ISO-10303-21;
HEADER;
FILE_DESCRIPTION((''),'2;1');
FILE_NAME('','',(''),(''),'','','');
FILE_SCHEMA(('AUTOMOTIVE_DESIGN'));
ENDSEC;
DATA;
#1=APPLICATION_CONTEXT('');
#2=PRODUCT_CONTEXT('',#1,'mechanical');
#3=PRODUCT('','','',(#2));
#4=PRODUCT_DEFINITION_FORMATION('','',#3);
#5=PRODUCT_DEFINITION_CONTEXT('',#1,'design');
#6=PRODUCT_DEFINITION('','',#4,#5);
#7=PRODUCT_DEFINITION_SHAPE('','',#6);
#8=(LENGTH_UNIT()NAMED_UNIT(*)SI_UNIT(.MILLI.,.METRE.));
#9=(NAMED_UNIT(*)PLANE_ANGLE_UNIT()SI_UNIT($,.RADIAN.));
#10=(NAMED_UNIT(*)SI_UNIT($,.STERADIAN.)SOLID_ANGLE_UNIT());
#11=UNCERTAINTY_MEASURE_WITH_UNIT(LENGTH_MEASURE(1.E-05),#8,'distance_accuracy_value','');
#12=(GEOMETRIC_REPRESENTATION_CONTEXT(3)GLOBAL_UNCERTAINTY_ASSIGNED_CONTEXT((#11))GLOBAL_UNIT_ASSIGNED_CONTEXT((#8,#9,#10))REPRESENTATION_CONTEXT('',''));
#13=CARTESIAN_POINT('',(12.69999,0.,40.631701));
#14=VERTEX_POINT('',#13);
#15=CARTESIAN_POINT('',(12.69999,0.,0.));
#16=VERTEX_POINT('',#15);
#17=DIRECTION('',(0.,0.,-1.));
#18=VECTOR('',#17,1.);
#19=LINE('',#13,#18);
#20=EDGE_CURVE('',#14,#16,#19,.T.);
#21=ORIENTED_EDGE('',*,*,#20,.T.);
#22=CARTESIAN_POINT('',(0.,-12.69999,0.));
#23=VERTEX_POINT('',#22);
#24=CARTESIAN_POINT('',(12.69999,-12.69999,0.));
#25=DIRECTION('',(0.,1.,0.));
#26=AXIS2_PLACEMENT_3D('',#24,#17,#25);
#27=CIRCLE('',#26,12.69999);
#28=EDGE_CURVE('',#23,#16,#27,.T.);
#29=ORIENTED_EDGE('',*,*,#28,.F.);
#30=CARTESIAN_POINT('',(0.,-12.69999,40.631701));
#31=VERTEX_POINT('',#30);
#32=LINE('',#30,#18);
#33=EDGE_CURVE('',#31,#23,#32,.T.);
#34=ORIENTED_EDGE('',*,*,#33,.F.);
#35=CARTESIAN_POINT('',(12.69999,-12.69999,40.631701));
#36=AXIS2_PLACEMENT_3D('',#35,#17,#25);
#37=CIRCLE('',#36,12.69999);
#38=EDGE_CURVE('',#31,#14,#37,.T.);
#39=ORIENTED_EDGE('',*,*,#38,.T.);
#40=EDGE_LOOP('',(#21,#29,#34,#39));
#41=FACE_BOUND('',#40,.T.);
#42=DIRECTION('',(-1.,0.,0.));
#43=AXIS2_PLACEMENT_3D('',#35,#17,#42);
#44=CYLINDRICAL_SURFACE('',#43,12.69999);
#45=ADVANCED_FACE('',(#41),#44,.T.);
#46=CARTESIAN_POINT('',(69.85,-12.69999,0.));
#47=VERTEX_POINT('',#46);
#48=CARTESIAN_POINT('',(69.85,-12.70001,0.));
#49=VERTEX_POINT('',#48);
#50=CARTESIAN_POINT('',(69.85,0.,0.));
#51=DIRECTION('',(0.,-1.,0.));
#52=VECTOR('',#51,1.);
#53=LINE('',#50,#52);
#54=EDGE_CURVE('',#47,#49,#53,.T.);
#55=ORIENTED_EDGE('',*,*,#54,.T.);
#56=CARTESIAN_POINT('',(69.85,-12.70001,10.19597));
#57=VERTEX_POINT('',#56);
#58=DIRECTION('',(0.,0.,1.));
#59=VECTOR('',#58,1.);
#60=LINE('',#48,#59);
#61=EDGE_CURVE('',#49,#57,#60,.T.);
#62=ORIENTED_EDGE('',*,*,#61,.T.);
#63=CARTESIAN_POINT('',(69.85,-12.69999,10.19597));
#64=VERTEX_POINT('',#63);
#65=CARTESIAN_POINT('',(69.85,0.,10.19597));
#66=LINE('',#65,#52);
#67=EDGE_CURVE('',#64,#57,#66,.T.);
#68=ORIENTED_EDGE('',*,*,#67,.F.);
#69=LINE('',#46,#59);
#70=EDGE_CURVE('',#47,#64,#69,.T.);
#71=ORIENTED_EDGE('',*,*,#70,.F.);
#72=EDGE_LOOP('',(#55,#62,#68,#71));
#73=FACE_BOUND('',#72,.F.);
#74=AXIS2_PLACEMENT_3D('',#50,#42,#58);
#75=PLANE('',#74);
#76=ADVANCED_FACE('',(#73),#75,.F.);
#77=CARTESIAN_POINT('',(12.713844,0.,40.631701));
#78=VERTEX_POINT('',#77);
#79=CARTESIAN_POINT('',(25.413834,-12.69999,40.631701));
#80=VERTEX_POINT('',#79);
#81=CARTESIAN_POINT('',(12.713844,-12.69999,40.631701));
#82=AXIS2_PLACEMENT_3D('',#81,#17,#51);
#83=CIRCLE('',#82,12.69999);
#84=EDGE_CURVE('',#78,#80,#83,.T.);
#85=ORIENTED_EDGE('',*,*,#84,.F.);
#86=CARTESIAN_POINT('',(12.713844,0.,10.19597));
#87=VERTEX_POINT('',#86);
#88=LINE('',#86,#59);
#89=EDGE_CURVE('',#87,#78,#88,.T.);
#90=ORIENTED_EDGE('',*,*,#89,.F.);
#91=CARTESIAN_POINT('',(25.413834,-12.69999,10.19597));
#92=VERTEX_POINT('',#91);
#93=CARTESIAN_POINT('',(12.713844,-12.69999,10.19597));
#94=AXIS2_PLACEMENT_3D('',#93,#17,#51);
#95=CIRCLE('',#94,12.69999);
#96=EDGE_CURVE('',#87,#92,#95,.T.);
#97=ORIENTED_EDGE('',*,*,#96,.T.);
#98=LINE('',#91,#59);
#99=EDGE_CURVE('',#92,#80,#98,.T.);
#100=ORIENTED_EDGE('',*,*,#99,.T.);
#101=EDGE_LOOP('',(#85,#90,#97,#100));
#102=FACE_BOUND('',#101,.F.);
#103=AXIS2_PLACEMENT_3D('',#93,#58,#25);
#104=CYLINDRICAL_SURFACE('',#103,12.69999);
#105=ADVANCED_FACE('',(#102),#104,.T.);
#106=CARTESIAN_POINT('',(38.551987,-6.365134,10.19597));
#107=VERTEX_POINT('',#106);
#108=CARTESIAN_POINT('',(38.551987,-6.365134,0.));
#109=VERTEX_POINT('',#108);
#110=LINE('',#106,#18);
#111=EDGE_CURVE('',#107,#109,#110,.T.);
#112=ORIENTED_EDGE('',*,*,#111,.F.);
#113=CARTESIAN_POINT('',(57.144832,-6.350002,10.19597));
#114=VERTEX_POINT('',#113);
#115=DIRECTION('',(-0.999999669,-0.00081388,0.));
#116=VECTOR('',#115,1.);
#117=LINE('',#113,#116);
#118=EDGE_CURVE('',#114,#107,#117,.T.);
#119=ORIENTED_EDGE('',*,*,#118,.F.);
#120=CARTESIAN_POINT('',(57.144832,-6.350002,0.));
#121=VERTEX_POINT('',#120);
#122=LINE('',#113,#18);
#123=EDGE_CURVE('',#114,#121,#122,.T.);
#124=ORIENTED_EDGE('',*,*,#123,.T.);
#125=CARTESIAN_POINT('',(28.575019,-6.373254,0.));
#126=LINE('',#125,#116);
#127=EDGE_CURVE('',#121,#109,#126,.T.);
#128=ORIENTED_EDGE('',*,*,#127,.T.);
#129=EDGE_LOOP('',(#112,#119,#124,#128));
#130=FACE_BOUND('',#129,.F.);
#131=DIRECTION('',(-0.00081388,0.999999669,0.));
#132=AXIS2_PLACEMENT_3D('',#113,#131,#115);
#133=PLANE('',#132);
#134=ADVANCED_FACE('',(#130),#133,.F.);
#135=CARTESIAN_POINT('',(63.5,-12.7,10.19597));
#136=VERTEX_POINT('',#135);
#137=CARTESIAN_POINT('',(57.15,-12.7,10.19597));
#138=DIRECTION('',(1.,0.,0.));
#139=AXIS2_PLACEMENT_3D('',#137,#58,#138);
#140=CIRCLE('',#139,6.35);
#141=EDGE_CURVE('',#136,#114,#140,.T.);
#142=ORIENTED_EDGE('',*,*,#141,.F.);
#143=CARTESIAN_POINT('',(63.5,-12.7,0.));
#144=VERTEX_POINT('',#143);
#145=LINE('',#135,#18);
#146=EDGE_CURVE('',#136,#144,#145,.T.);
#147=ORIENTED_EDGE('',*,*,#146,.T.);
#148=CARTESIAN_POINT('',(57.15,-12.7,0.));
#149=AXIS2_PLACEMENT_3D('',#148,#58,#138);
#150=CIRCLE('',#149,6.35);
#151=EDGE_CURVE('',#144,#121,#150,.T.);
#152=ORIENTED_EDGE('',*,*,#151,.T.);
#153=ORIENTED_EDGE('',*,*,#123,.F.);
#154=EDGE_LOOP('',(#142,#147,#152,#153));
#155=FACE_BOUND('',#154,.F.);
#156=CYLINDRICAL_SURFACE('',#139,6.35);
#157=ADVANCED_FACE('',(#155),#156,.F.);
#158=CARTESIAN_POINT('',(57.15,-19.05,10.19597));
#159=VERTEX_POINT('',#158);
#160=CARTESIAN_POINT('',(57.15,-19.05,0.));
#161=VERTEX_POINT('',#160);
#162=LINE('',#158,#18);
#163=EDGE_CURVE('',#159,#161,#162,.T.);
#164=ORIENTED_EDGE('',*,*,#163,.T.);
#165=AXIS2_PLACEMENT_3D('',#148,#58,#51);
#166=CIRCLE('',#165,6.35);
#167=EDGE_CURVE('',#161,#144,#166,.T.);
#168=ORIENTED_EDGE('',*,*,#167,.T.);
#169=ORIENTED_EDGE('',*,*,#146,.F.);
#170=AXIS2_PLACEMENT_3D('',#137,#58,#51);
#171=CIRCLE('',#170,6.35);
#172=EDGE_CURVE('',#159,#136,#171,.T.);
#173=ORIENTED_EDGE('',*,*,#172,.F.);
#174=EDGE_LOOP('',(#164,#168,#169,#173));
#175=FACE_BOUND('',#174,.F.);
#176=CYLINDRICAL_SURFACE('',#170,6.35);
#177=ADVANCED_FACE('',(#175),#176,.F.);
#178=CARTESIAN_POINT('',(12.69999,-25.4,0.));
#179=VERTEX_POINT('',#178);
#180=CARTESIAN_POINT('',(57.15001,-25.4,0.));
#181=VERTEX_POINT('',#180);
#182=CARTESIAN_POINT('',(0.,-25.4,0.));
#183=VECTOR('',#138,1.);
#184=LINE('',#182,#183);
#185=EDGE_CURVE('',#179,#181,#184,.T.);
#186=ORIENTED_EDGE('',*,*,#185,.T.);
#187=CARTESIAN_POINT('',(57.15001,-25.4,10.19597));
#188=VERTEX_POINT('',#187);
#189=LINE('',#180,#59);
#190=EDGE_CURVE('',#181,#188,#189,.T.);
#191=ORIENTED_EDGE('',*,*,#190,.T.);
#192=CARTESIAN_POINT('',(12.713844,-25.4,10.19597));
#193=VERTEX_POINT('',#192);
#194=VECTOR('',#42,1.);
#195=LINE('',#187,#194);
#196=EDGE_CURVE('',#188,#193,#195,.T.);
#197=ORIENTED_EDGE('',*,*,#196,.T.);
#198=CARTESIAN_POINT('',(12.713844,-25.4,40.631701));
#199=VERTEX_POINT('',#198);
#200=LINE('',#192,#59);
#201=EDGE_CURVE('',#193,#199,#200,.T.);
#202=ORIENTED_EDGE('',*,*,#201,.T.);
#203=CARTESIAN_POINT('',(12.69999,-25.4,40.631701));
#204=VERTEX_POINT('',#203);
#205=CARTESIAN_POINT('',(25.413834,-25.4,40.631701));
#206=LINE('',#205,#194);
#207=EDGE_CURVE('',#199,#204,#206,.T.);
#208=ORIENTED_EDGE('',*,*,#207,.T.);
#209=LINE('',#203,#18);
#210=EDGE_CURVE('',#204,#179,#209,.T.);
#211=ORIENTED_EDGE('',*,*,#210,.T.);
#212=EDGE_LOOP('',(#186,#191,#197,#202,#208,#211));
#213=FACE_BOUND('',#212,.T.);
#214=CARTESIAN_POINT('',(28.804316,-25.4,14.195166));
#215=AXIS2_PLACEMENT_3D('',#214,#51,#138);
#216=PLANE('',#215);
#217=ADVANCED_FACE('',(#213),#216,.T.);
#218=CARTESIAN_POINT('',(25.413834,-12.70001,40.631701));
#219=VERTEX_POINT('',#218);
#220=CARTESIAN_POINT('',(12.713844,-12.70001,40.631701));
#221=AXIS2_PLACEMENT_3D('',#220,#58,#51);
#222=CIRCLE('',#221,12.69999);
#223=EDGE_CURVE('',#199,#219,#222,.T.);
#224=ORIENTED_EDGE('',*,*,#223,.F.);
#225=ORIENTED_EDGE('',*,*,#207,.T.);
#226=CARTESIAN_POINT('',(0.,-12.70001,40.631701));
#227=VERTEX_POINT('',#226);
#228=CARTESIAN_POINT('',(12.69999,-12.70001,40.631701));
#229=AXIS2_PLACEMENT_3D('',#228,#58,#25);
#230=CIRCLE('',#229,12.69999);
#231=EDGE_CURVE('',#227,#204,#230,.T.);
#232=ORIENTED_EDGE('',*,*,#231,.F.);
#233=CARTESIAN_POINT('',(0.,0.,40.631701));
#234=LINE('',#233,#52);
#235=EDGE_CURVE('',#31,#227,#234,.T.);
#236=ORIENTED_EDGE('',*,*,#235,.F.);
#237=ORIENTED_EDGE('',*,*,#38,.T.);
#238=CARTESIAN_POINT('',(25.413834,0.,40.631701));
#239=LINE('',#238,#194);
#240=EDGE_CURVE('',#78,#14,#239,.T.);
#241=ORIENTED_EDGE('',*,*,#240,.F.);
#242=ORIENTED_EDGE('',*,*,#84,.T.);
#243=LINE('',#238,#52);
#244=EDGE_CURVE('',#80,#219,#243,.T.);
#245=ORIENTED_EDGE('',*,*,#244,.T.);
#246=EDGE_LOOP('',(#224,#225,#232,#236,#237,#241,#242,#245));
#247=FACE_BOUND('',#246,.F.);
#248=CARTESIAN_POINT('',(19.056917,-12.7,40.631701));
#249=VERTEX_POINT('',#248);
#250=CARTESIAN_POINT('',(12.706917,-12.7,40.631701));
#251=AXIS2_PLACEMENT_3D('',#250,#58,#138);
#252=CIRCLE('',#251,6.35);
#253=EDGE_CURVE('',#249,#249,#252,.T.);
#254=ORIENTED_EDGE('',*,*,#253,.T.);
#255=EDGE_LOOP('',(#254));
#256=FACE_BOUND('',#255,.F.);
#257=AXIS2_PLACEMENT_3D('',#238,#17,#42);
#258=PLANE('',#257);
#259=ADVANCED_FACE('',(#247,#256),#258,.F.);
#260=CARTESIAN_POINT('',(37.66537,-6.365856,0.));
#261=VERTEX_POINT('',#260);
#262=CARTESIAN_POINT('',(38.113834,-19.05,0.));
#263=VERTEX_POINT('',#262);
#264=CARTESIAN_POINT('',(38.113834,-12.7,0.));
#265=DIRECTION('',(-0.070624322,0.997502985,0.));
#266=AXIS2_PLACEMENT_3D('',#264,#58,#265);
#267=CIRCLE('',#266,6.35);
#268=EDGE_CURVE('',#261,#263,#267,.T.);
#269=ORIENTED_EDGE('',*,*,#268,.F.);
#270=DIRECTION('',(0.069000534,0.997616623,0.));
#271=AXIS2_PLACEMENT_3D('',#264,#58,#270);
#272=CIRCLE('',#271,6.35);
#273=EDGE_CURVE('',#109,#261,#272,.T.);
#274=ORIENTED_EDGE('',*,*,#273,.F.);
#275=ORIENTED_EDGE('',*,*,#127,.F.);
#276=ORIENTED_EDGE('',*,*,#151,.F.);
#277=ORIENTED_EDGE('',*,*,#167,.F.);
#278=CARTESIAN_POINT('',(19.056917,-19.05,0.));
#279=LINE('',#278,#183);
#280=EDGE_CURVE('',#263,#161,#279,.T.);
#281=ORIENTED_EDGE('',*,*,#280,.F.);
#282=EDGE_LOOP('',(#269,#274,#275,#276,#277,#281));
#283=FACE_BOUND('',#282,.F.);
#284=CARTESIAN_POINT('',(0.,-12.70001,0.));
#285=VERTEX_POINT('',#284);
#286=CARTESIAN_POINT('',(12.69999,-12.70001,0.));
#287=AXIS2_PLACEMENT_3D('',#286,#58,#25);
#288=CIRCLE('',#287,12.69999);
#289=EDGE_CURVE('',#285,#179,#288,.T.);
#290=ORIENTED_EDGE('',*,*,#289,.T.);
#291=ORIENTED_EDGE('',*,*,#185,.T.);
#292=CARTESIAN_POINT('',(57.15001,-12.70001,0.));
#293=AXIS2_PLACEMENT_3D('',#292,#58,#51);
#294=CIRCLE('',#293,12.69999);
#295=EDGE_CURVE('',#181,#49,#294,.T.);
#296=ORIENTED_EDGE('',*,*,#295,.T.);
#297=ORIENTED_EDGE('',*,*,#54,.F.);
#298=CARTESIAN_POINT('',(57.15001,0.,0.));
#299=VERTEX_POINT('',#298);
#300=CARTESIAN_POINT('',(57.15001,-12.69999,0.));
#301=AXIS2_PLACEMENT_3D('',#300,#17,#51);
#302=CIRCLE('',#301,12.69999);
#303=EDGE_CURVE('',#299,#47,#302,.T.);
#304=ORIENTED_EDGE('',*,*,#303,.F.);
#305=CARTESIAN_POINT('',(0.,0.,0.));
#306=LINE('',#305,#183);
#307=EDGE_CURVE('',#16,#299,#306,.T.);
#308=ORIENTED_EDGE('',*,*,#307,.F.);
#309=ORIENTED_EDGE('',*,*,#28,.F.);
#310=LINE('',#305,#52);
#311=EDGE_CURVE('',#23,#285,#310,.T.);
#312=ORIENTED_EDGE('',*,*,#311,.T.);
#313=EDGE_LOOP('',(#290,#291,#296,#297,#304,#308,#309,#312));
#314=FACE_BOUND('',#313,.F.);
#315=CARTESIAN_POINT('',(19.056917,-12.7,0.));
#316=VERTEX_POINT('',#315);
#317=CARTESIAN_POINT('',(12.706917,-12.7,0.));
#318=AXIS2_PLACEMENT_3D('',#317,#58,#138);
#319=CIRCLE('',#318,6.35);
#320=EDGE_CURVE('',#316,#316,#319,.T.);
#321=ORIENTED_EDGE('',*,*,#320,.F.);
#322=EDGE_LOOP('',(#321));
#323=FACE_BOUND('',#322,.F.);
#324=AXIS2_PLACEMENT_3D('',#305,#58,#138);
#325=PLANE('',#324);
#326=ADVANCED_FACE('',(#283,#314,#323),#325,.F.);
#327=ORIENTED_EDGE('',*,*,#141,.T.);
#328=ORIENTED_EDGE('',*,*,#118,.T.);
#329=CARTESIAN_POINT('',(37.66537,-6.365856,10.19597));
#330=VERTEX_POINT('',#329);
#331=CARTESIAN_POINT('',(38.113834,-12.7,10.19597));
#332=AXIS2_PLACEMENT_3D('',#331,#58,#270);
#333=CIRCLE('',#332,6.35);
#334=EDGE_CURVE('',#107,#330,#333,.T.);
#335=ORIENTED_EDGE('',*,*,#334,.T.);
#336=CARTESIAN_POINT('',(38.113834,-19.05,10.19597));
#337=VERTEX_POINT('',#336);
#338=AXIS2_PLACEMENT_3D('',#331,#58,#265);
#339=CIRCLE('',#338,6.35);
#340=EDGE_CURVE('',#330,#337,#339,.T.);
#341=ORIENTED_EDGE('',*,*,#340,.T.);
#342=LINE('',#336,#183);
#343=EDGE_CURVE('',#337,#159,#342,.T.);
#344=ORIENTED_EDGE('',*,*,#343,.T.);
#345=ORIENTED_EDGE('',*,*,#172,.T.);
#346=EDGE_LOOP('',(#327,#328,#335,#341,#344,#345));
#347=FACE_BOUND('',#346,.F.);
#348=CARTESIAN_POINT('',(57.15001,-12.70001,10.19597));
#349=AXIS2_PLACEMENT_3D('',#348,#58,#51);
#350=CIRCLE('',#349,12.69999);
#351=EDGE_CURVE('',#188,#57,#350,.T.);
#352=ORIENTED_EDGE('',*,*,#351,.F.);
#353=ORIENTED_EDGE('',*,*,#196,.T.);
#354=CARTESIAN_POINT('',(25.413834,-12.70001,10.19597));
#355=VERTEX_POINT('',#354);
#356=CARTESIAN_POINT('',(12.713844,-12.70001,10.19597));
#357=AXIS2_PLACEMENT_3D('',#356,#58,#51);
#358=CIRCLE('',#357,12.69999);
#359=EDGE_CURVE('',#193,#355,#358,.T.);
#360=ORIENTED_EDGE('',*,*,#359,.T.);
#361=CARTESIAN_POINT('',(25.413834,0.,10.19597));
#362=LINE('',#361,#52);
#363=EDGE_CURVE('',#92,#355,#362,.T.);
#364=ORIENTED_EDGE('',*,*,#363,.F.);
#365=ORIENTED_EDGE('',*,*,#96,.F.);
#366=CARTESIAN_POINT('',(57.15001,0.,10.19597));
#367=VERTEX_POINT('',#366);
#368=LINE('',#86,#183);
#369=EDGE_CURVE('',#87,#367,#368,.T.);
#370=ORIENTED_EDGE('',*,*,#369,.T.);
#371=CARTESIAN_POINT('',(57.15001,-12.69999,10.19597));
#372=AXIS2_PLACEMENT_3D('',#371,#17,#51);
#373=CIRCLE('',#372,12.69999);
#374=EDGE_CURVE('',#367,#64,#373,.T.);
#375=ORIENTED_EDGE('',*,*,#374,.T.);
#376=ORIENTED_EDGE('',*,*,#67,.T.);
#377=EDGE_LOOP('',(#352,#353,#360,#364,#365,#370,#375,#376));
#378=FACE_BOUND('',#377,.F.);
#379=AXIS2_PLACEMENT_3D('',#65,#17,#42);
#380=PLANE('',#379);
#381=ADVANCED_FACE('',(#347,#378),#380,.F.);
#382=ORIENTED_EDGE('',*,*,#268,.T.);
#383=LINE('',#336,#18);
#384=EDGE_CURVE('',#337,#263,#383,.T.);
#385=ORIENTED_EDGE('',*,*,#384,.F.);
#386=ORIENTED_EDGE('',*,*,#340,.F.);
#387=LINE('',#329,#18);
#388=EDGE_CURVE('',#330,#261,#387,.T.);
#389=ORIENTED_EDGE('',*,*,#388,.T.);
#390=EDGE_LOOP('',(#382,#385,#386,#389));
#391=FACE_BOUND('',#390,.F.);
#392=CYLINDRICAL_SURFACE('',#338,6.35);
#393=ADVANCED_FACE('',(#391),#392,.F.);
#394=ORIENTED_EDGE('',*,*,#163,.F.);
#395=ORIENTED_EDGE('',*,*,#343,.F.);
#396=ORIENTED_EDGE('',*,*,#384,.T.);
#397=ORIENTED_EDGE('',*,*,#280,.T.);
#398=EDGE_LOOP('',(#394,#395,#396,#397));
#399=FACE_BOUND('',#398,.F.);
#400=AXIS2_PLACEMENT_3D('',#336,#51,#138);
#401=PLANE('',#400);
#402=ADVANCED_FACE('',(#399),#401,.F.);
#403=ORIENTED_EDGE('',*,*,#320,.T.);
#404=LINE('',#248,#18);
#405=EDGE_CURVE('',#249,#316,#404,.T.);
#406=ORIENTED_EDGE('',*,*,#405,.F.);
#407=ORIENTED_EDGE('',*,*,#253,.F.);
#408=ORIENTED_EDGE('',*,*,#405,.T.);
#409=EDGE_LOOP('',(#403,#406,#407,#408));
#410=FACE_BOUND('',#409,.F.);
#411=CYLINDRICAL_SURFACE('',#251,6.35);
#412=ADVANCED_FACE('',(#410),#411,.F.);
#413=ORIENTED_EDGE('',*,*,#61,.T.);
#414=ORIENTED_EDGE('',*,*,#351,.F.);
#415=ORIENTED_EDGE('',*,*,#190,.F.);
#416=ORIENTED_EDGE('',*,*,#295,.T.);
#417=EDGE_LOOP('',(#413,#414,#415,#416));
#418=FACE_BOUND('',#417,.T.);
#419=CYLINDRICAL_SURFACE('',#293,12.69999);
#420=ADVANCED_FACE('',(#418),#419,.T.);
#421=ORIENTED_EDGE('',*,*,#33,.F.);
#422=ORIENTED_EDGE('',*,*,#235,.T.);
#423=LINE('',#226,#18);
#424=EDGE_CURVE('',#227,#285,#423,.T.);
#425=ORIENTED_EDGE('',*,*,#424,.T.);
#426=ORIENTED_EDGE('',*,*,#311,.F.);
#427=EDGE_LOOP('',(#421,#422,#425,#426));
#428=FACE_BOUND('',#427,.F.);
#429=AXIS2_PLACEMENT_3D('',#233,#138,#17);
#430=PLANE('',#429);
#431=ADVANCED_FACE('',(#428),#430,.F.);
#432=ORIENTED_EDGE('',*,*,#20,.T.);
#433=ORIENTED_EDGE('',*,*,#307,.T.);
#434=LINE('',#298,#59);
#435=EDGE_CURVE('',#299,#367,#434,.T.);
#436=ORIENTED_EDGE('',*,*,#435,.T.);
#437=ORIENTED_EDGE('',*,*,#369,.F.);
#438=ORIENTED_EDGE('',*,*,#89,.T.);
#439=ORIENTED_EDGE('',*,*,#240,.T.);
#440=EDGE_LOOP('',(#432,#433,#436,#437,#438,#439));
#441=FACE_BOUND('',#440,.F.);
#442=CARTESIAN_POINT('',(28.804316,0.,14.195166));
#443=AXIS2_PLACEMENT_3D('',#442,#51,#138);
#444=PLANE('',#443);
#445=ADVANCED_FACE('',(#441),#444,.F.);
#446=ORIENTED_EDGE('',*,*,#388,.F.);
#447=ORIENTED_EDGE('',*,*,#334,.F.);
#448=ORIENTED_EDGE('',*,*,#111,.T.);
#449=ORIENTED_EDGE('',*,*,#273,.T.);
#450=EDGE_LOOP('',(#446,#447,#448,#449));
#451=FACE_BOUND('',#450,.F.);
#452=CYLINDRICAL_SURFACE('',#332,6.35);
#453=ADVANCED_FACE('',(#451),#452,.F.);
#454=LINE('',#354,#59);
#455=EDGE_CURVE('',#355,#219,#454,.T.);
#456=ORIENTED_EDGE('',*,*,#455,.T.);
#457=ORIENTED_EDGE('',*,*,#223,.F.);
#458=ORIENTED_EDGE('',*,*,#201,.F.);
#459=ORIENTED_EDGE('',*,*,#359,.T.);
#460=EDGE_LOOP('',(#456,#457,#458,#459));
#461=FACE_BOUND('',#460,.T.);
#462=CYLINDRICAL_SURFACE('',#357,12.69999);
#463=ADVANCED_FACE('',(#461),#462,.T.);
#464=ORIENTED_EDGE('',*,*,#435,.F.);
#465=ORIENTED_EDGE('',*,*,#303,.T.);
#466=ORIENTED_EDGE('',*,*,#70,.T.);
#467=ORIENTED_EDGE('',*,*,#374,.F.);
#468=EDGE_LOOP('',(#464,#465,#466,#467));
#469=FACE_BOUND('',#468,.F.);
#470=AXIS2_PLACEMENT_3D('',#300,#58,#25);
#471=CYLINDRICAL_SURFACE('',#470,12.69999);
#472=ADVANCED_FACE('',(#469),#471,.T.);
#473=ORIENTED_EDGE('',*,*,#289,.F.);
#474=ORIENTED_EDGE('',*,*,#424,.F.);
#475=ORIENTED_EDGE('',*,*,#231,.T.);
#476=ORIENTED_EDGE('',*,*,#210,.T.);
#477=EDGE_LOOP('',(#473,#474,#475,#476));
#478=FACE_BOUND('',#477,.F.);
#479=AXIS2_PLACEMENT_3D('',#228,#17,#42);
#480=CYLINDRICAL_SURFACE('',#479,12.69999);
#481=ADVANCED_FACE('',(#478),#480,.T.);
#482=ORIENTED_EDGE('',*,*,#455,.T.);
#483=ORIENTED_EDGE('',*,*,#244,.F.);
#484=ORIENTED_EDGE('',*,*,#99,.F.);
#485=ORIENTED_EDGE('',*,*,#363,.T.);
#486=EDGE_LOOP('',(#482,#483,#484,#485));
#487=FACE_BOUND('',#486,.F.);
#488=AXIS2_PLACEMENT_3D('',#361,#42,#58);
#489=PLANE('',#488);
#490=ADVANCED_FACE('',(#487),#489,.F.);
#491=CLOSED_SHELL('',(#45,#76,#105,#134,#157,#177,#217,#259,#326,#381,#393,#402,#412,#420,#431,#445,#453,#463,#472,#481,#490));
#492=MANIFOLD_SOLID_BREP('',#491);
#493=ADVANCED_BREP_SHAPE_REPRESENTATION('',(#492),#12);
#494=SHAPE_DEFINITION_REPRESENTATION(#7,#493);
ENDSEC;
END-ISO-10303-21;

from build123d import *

# Parameters (mm, degrees)
F1_DEPTH = 25.4
F2_R     = 6.35
F3_DEPTH = 50.8
F4_R     = 12.69999
F6_DEPTH = 25.4


# Not quite as in the source:
# - a fillet or chamfer is up to 0.001 mm smaller than in the source, because OpenCascade refuses the exact size


with BuildPart() as f1:
    # F0 (on Front) → F1 (new body)
    with BuildSketch(Plane.XZ):
        Polygon((0, 40.6317008091), (0, 0), (69.85, 0), (69.85, 10.1959701541), (25.413833983, 10.1959701541), (25.413833983, 40.6317008091), align=None)
    extrude(amount=F1_DEPTH)

    # F2 (on face) → F3 (cut)
    with BuildSketch(Plane.XY.offset(40.6317008091)):
        with Locations((12.7069169915, -12.7)):
            Circle(F2_R)
    extrude(amount=-F3_DEPTH, mode=Mode.SUBTRACT)

    # F4 (radius 12.7 in the source; OpenCascade refuses exactly that, so slightly less here)
    f4_edges = [f1.edges().sort_by_distance(p)[0] for p in [
        (25.413834, -25.4, 25.413835),
        (25.413834, 0, 25.413835),
        (0, -25.4, 20.31585),
        (0, 0, 20.31585),
        (69.85, -25.4, 5.097985),
        (69.85, 0, 5.097985),
    ]]
    fillet(f4_edges, radius=F4_R)

    # F5 (on face) → F6 (cut)
    with BuildSketch(Plane.XY.offset(10.1959701541)):
        with BuildLine():
            Line((38.5519873755, -6.3651344446), (37.6653695389, -6.365856045))
            ThreePointArc((37.6653695389, -6.365856045), (31.7677992323, -12.9243723311), (38.113833983, -19.05))
            ThreePointArc((38.113833983, -19.05), (42.6039620435, -17.1901280605), (44.463833983, -12.7))
            ThreePointArc((44.463833983, -12.7), (42.7562888316, -8.3675511568), (38.5519873755, -6.3651344446))
        make_face()
        with BuildLine():
            ThreePointArc((38.5519873755, -6.3651344446), (38.1086658476, -6.3500021031), (37.6653695389, -6.365856045))
            Line((37.6653695389, -6.365856045), (38.5519873755, -6.3651344446))
        make_face()
        with BuildLine():
            ThreePointArc((44.463833983, -12.7), (42.6039620435, -17.1901280605), (38.113833983, -19.05))
            Line((38.113833983, -19.05), (57.15, -19.05))
            ThreePointArc((57.15, -19.05), (50.8000005258, -12.7025840679), (57.1448318647, -6.3500021031))
            Line((57.1448318647, -6.3500021031), (38.5519873755, -6.3651344446))
            ThreePointArc((38.5519873755, -6.3651344446), (42.7562888316, -8.3675511568), (44.463833983, -12.7))
        make_face()
        with BuildLine():
            ThreePointArc((57.1448318647, -6.3500021031), (50.8000005258, -12.7025840679), (57.15, -19.05))
            ThreePointArc((57.15, -19.05), (61.6401280605, -17.1901280605), (63.5, -12.7))
            ThreePointArc((63.5, -12.7), (61.6383004768, -8.2080450993), (57.1448318647, -6.3500021031))
        make_face()
    extrude(amount=-F6_DEPTH, mode=Mode.SUBTRACT)


solid = f1.part
